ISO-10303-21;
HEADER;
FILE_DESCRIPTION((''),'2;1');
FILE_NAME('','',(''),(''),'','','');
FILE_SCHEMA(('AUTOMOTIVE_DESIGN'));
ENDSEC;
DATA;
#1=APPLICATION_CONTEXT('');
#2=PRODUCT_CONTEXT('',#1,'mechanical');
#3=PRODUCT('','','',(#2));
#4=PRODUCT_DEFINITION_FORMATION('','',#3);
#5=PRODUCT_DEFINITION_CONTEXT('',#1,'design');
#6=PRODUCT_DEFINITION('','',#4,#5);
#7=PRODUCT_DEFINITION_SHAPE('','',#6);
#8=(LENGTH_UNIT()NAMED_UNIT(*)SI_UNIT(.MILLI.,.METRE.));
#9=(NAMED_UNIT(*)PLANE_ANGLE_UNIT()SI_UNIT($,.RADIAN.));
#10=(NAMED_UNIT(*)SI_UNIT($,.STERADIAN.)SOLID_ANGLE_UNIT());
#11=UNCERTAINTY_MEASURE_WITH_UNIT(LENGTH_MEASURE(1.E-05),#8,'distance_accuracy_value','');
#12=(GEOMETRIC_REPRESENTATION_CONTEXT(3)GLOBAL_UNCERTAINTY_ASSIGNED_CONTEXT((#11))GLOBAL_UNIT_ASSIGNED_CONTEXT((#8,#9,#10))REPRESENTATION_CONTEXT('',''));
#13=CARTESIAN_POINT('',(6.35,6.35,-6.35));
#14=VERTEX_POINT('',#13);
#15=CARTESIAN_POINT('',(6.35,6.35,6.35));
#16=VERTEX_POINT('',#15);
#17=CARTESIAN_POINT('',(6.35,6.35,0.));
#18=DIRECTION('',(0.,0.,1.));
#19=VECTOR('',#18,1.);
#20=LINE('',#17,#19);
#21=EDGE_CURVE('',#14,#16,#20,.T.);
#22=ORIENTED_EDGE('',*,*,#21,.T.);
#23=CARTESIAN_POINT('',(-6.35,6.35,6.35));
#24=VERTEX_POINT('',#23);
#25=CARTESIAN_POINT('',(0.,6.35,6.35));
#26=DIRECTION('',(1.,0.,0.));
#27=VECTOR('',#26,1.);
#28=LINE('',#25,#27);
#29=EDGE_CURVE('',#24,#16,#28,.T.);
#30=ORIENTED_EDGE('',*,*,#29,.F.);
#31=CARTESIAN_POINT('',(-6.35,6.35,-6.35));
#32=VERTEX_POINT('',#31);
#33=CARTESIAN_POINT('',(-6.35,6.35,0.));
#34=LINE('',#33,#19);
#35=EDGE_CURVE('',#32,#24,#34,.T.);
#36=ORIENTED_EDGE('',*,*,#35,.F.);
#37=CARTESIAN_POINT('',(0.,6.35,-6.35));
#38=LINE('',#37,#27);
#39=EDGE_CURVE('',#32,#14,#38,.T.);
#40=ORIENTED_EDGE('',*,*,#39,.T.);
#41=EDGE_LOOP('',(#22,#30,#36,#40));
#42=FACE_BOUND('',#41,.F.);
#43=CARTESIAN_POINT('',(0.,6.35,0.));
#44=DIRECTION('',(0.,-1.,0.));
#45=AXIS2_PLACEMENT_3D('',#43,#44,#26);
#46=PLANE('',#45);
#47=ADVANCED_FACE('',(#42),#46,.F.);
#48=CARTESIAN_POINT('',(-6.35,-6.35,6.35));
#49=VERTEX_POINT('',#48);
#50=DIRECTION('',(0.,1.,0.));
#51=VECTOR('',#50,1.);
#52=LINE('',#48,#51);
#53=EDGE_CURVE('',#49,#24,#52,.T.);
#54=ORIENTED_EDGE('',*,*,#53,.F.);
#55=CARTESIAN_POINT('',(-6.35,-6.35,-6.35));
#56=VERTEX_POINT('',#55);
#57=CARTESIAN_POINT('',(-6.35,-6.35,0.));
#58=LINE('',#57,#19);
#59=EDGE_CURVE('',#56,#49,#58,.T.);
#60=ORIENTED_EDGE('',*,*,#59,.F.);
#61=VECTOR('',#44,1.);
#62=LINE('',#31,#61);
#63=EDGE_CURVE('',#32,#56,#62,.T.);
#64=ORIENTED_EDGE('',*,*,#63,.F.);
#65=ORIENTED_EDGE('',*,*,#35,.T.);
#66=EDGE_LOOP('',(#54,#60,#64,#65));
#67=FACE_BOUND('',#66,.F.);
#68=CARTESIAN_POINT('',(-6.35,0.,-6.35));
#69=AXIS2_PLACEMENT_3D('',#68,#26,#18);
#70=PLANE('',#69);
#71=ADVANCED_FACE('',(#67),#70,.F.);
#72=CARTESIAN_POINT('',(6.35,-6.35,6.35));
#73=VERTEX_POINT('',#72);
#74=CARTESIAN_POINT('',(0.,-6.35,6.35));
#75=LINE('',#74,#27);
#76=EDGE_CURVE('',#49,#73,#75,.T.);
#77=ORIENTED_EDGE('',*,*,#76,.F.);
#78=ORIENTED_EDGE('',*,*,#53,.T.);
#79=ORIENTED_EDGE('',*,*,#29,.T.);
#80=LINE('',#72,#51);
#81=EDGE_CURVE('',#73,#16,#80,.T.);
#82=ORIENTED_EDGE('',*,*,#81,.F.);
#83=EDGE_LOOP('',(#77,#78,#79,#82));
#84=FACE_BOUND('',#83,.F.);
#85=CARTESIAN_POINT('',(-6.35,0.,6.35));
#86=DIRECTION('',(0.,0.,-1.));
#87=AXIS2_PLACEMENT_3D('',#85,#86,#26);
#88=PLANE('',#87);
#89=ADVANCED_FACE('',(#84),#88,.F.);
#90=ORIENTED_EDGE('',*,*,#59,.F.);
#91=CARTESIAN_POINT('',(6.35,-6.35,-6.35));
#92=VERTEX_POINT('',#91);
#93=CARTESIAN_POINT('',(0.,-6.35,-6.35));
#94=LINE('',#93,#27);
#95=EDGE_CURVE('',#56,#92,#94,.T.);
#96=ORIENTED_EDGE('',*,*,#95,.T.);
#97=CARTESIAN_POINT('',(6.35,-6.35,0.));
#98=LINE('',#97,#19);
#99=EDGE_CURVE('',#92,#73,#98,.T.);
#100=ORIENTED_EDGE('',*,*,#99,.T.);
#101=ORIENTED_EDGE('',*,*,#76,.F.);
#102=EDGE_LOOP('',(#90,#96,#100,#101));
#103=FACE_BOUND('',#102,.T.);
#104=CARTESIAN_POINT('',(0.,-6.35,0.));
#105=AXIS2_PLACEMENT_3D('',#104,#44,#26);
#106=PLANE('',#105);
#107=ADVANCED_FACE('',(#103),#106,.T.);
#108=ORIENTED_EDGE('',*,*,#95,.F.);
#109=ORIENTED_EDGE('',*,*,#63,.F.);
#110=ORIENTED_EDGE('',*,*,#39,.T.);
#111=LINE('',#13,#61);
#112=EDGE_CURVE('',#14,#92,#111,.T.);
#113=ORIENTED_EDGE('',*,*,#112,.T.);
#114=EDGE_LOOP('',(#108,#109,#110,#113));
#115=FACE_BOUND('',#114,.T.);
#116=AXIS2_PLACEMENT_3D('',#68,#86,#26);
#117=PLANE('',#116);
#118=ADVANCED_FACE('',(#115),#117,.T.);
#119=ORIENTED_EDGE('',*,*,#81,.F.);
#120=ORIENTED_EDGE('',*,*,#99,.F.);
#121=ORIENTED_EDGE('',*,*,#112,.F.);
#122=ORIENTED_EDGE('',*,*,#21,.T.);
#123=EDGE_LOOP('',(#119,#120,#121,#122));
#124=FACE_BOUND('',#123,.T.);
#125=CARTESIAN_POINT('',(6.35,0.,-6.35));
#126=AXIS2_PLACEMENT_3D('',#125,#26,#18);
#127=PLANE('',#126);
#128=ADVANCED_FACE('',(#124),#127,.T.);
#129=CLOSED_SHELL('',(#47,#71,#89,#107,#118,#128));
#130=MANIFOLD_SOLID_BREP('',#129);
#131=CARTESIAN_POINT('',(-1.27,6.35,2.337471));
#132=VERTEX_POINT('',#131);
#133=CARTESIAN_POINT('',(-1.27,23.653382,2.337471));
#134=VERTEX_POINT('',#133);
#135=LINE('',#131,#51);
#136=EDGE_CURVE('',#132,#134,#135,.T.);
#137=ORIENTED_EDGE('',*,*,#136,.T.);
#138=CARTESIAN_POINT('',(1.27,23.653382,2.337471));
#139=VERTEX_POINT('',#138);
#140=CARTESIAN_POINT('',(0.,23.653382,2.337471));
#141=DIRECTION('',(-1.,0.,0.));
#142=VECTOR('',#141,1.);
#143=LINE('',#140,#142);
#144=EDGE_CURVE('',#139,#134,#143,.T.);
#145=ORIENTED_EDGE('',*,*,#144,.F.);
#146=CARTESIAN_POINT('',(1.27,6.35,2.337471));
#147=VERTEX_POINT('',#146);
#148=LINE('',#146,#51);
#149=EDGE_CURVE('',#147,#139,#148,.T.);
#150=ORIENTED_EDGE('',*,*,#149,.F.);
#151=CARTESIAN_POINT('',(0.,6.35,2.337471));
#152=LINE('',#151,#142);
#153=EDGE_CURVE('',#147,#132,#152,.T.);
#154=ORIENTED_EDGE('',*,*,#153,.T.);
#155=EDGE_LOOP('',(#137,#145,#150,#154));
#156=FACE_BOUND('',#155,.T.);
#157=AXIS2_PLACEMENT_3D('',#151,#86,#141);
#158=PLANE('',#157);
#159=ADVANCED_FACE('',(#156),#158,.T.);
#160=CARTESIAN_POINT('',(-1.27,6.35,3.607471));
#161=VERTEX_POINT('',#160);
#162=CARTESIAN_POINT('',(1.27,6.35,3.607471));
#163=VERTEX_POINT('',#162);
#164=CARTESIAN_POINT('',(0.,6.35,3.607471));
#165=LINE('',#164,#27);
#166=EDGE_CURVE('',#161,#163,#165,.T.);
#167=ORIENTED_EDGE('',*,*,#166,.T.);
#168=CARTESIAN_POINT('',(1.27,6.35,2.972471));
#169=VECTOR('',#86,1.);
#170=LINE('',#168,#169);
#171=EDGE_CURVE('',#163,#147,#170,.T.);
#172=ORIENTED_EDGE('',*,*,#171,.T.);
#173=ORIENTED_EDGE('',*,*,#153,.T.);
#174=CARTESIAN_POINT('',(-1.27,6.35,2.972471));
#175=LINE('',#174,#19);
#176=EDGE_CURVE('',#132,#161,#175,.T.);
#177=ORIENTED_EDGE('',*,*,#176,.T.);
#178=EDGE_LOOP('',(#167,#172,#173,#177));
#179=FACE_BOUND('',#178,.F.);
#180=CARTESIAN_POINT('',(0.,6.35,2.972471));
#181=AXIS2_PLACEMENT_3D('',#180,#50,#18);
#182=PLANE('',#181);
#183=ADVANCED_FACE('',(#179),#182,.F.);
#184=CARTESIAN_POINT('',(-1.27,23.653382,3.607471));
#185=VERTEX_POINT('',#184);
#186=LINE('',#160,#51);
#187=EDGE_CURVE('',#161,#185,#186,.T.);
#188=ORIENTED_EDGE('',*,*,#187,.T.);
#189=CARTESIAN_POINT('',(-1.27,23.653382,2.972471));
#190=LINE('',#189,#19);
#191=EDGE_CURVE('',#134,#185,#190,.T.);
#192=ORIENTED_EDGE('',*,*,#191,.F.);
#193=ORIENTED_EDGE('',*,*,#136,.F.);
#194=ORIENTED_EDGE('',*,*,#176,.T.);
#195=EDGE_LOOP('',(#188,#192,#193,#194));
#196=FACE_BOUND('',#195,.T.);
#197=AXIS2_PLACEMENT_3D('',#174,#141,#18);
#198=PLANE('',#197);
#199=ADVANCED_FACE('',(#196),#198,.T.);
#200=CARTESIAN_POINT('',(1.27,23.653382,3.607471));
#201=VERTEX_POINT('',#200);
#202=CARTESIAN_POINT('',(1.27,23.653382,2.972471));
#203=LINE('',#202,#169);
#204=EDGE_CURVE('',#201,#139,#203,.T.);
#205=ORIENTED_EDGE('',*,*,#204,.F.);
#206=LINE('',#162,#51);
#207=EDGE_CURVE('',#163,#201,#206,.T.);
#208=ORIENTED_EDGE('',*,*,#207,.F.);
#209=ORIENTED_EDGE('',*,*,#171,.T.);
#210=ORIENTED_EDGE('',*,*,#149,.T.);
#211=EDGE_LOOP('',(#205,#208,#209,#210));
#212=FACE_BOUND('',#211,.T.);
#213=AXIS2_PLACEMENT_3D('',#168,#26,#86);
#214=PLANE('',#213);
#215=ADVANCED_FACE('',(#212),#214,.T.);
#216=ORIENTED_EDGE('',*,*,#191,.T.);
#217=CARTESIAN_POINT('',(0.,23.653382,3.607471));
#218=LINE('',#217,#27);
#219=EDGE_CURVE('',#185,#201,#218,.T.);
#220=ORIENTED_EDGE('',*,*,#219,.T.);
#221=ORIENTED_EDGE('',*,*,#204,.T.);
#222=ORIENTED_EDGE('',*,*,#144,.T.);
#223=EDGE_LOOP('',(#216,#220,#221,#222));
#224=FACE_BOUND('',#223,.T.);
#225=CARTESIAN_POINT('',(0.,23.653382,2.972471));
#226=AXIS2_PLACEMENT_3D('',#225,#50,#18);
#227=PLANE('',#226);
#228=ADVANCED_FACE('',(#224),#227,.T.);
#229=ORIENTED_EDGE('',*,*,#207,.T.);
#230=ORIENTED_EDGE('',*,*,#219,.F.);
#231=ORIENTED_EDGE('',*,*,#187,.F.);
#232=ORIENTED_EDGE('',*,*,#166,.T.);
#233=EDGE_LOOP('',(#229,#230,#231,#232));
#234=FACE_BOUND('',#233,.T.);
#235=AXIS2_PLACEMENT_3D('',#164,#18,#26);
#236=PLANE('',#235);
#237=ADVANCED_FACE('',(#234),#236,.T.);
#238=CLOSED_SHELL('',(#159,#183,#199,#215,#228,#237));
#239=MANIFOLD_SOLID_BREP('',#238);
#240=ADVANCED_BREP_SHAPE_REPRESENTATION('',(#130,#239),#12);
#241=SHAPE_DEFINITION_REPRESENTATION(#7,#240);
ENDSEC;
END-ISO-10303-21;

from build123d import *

# Parameters (mm, degrees)
F1_W     = 12.7
F1_H     = 12.7
F2_DEPTH = 6.35
F4_W     = 2.54
F4_H     = 1.27


# Not quite as in the source:
# - a variable given as a bare number and used for a length is read in inches; the dataset says mm whatever the document's units were


with BuildPart() as f2:
    # F1 (on Front) → F2 (new body, symmetric)
    with BuildSketch(Plane.XZ):
        Rectangle(F1_W, F1_H)
    extrude(amount=F2_DEPTH, both=True)


with BuildPart() as f5:
    # F5: sweep along a path in F3
    with BuildLine(Plane.YZ) as f5_path:
        Line((6.35, 2.9724712949), (23.6533820465, 2.9724712949))
    # F4 (on face) → F5 (sweep)
    with BuildSketch(Plane(origin=(0, 6.35, 0), x_dir=(-1, 0, 0), z_dir=(0, 1, 0))):
        with Locations((0, 2.9724712949)):
            Rectangle(F4_W, F4_H)
    sweep(path=f5_path.line)


solid = Compound([f2.part, f5.part])
